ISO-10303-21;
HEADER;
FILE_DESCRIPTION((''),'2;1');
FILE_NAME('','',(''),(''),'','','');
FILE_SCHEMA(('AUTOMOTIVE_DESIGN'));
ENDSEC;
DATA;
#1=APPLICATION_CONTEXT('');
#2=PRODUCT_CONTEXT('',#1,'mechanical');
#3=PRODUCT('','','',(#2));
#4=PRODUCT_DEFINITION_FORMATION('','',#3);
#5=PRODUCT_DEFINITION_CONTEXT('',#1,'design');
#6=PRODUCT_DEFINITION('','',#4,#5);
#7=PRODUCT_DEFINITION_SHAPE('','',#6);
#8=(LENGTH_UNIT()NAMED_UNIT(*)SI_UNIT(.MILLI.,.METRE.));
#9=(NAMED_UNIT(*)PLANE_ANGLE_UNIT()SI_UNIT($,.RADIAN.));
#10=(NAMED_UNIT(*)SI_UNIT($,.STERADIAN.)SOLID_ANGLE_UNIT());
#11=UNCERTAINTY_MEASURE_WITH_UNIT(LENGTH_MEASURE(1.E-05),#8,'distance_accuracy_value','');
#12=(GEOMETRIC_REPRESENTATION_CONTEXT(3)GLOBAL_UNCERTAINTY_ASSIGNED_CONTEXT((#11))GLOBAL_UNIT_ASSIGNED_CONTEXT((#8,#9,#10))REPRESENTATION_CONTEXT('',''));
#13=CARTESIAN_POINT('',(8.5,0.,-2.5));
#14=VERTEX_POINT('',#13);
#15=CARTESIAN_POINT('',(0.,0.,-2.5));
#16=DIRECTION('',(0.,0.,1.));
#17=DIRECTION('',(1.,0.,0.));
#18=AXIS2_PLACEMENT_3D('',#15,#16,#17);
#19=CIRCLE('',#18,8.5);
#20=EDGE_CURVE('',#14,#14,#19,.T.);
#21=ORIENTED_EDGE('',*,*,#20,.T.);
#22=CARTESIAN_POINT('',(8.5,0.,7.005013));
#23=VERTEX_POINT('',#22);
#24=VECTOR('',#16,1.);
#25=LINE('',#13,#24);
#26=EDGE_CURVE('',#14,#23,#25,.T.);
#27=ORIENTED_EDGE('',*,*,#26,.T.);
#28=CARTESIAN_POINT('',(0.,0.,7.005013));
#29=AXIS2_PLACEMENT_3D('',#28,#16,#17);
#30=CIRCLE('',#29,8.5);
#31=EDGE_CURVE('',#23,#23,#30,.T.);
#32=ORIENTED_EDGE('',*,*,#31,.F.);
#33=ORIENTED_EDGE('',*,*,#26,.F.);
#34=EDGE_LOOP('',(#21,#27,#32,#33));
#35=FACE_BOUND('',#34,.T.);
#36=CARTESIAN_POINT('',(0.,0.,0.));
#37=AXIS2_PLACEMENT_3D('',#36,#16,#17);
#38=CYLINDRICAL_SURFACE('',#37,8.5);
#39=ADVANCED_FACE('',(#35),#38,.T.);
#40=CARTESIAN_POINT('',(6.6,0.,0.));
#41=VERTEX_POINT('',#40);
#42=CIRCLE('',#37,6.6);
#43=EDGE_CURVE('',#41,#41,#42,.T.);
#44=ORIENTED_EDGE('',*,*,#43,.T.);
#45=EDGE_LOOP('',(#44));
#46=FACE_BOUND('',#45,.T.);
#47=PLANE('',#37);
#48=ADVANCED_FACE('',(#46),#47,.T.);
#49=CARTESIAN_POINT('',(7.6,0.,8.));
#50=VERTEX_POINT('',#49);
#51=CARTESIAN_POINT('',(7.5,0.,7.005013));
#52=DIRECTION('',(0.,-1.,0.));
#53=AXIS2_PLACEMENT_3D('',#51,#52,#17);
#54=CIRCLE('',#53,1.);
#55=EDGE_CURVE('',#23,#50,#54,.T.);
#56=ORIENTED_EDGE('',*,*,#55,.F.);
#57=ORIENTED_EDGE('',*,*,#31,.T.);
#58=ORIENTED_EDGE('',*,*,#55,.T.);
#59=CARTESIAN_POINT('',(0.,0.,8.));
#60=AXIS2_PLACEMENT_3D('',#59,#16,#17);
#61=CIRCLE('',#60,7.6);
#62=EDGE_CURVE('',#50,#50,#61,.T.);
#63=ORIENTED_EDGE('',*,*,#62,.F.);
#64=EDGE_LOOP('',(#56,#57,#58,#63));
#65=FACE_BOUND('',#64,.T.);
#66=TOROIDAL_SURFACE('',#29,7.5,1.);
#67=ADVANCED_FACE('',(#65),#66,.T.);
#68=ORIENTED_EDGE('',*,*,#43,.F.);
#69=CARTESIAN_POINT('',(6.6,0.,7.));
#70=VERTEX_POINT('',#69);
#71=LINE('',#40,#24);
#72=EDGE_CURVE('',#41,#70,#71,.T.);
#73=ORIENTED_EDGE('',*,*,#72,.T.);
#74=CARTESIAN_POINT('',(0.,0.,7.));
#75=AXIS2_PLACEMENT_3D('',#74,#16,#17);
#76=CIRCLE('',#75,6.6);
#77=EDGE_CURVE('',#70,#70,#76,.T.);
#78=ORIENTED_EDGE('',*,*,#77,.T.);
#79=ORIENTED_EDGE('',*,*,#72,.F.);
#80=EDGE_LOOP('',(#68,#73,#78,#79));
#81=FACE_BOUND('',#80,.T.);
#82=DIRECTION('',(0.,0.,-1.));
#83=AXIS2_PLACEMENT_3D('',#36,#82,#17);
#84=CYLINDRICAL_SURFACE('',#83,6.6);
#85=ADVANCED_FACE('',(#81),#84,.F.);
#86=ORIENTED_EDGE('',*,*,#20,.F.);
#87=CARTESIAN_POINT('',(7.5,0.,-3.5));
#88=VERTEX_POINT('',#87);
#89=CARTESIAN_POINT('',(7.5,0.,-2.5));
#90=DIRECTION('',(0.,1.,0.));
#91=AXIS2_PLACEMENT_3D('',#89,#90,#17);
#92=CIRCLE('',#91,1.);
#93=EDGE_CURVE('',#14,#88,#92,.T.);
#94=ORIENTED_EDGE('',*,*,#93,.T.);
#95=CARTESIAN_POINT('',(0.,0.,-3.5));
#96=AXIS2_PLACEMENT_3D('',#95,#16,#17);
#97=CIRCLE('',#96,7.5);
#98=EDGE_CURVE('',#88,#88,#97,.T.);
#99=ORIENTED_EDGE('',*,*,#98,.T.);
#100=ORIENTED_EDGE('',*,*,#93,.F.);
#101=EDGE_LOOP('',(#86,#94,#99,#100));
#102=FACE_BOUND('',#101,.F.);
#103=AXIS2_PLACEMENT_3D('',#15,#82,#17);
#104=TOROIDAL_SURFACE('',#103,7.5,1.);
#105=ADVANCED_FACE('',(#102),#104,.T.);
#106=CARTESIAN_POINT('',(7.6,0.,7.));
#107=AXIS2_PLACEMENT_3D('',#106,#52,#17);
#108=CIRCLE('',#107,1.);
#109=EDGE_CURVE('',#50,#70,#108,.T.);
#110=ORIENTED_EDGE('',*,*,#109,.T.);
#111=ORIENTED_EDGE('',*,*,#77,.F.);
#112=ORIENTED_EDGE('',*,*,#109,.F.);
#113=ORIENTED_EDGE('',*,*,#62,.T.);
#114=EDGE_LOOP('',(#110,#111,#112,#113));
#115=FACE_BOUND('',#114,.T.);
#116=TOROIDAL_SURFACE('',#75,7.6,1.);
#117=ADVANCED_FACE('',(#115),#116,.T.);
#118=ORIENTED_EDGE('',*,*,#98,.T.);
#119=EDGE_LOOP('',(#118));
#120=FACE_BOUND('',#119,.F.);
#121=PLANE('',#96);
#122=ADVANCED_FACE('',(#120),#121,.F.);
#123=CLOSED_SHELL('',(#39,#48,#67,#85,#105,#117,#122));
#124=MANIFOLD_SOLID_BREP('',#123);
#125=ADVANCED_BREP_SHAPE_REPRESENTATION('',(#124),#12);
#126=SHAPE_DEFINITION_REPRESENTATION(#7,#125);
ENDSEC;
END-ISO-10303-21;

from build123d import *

# Parameters (mm, degrees)
F0_R     = 8.5
F1_DEPTH = 3.5
F2_R     = 8.5
F2_R_2   = 6.6
F3_DEPTH = 8
F4_R     = 1


# Not quite as in the source:
# - a fillet or chamfer that OpenCascade refuses, or shapes differently, is made with other operations: its cross-section is extruded or revolved along the edge and cut away or added
# - a feature names something its author has since deleted; it is built from what else it names


with BuildPart() as f1:
    # F0 (on Top) → F1 (new body)
    with BuildSketch(Plane.XY):
        Circle(F0_R)
    extrude(amount=-F1_DEPTH)

    # F2 (on face) → F3 (join)
    with BuildSketch(Plane.XY):
        Circle(F2_R)
        Circle(F2_R_2, mode=Mode.SUBTRACT)
    extrude(amount=F3_DEPTH)

    # F4
    f4_edges = [f1.edges().sort_by_distance(p)[0] for p in [
        (-6.6, 0, 8),
        (-8.5, 0, -3.5),
    ]]
    fillet(f4_edges, radius=F4_R)

    # F5: fillet of radius 1 on 1 edges, made by hand

    # F5_s1 → F5_t2 (revolve, cut)
    with BuildSketch(Plane.XZ):
        with BuildLine():
            ThreePointArc((8.5, 7.0050125629), (8.2416198487, 7.6758329561), (7.6, 8))
            Line((7.6, 8), (8.5, 8))
            Line((8.5, 8), (8.5, 7.0050125629))
        make_face()
    revolve(axis=Axis((0, 0, 8), (0, 0, 1)), mode=Mode.SUBTRACT)


solid = f1.part
